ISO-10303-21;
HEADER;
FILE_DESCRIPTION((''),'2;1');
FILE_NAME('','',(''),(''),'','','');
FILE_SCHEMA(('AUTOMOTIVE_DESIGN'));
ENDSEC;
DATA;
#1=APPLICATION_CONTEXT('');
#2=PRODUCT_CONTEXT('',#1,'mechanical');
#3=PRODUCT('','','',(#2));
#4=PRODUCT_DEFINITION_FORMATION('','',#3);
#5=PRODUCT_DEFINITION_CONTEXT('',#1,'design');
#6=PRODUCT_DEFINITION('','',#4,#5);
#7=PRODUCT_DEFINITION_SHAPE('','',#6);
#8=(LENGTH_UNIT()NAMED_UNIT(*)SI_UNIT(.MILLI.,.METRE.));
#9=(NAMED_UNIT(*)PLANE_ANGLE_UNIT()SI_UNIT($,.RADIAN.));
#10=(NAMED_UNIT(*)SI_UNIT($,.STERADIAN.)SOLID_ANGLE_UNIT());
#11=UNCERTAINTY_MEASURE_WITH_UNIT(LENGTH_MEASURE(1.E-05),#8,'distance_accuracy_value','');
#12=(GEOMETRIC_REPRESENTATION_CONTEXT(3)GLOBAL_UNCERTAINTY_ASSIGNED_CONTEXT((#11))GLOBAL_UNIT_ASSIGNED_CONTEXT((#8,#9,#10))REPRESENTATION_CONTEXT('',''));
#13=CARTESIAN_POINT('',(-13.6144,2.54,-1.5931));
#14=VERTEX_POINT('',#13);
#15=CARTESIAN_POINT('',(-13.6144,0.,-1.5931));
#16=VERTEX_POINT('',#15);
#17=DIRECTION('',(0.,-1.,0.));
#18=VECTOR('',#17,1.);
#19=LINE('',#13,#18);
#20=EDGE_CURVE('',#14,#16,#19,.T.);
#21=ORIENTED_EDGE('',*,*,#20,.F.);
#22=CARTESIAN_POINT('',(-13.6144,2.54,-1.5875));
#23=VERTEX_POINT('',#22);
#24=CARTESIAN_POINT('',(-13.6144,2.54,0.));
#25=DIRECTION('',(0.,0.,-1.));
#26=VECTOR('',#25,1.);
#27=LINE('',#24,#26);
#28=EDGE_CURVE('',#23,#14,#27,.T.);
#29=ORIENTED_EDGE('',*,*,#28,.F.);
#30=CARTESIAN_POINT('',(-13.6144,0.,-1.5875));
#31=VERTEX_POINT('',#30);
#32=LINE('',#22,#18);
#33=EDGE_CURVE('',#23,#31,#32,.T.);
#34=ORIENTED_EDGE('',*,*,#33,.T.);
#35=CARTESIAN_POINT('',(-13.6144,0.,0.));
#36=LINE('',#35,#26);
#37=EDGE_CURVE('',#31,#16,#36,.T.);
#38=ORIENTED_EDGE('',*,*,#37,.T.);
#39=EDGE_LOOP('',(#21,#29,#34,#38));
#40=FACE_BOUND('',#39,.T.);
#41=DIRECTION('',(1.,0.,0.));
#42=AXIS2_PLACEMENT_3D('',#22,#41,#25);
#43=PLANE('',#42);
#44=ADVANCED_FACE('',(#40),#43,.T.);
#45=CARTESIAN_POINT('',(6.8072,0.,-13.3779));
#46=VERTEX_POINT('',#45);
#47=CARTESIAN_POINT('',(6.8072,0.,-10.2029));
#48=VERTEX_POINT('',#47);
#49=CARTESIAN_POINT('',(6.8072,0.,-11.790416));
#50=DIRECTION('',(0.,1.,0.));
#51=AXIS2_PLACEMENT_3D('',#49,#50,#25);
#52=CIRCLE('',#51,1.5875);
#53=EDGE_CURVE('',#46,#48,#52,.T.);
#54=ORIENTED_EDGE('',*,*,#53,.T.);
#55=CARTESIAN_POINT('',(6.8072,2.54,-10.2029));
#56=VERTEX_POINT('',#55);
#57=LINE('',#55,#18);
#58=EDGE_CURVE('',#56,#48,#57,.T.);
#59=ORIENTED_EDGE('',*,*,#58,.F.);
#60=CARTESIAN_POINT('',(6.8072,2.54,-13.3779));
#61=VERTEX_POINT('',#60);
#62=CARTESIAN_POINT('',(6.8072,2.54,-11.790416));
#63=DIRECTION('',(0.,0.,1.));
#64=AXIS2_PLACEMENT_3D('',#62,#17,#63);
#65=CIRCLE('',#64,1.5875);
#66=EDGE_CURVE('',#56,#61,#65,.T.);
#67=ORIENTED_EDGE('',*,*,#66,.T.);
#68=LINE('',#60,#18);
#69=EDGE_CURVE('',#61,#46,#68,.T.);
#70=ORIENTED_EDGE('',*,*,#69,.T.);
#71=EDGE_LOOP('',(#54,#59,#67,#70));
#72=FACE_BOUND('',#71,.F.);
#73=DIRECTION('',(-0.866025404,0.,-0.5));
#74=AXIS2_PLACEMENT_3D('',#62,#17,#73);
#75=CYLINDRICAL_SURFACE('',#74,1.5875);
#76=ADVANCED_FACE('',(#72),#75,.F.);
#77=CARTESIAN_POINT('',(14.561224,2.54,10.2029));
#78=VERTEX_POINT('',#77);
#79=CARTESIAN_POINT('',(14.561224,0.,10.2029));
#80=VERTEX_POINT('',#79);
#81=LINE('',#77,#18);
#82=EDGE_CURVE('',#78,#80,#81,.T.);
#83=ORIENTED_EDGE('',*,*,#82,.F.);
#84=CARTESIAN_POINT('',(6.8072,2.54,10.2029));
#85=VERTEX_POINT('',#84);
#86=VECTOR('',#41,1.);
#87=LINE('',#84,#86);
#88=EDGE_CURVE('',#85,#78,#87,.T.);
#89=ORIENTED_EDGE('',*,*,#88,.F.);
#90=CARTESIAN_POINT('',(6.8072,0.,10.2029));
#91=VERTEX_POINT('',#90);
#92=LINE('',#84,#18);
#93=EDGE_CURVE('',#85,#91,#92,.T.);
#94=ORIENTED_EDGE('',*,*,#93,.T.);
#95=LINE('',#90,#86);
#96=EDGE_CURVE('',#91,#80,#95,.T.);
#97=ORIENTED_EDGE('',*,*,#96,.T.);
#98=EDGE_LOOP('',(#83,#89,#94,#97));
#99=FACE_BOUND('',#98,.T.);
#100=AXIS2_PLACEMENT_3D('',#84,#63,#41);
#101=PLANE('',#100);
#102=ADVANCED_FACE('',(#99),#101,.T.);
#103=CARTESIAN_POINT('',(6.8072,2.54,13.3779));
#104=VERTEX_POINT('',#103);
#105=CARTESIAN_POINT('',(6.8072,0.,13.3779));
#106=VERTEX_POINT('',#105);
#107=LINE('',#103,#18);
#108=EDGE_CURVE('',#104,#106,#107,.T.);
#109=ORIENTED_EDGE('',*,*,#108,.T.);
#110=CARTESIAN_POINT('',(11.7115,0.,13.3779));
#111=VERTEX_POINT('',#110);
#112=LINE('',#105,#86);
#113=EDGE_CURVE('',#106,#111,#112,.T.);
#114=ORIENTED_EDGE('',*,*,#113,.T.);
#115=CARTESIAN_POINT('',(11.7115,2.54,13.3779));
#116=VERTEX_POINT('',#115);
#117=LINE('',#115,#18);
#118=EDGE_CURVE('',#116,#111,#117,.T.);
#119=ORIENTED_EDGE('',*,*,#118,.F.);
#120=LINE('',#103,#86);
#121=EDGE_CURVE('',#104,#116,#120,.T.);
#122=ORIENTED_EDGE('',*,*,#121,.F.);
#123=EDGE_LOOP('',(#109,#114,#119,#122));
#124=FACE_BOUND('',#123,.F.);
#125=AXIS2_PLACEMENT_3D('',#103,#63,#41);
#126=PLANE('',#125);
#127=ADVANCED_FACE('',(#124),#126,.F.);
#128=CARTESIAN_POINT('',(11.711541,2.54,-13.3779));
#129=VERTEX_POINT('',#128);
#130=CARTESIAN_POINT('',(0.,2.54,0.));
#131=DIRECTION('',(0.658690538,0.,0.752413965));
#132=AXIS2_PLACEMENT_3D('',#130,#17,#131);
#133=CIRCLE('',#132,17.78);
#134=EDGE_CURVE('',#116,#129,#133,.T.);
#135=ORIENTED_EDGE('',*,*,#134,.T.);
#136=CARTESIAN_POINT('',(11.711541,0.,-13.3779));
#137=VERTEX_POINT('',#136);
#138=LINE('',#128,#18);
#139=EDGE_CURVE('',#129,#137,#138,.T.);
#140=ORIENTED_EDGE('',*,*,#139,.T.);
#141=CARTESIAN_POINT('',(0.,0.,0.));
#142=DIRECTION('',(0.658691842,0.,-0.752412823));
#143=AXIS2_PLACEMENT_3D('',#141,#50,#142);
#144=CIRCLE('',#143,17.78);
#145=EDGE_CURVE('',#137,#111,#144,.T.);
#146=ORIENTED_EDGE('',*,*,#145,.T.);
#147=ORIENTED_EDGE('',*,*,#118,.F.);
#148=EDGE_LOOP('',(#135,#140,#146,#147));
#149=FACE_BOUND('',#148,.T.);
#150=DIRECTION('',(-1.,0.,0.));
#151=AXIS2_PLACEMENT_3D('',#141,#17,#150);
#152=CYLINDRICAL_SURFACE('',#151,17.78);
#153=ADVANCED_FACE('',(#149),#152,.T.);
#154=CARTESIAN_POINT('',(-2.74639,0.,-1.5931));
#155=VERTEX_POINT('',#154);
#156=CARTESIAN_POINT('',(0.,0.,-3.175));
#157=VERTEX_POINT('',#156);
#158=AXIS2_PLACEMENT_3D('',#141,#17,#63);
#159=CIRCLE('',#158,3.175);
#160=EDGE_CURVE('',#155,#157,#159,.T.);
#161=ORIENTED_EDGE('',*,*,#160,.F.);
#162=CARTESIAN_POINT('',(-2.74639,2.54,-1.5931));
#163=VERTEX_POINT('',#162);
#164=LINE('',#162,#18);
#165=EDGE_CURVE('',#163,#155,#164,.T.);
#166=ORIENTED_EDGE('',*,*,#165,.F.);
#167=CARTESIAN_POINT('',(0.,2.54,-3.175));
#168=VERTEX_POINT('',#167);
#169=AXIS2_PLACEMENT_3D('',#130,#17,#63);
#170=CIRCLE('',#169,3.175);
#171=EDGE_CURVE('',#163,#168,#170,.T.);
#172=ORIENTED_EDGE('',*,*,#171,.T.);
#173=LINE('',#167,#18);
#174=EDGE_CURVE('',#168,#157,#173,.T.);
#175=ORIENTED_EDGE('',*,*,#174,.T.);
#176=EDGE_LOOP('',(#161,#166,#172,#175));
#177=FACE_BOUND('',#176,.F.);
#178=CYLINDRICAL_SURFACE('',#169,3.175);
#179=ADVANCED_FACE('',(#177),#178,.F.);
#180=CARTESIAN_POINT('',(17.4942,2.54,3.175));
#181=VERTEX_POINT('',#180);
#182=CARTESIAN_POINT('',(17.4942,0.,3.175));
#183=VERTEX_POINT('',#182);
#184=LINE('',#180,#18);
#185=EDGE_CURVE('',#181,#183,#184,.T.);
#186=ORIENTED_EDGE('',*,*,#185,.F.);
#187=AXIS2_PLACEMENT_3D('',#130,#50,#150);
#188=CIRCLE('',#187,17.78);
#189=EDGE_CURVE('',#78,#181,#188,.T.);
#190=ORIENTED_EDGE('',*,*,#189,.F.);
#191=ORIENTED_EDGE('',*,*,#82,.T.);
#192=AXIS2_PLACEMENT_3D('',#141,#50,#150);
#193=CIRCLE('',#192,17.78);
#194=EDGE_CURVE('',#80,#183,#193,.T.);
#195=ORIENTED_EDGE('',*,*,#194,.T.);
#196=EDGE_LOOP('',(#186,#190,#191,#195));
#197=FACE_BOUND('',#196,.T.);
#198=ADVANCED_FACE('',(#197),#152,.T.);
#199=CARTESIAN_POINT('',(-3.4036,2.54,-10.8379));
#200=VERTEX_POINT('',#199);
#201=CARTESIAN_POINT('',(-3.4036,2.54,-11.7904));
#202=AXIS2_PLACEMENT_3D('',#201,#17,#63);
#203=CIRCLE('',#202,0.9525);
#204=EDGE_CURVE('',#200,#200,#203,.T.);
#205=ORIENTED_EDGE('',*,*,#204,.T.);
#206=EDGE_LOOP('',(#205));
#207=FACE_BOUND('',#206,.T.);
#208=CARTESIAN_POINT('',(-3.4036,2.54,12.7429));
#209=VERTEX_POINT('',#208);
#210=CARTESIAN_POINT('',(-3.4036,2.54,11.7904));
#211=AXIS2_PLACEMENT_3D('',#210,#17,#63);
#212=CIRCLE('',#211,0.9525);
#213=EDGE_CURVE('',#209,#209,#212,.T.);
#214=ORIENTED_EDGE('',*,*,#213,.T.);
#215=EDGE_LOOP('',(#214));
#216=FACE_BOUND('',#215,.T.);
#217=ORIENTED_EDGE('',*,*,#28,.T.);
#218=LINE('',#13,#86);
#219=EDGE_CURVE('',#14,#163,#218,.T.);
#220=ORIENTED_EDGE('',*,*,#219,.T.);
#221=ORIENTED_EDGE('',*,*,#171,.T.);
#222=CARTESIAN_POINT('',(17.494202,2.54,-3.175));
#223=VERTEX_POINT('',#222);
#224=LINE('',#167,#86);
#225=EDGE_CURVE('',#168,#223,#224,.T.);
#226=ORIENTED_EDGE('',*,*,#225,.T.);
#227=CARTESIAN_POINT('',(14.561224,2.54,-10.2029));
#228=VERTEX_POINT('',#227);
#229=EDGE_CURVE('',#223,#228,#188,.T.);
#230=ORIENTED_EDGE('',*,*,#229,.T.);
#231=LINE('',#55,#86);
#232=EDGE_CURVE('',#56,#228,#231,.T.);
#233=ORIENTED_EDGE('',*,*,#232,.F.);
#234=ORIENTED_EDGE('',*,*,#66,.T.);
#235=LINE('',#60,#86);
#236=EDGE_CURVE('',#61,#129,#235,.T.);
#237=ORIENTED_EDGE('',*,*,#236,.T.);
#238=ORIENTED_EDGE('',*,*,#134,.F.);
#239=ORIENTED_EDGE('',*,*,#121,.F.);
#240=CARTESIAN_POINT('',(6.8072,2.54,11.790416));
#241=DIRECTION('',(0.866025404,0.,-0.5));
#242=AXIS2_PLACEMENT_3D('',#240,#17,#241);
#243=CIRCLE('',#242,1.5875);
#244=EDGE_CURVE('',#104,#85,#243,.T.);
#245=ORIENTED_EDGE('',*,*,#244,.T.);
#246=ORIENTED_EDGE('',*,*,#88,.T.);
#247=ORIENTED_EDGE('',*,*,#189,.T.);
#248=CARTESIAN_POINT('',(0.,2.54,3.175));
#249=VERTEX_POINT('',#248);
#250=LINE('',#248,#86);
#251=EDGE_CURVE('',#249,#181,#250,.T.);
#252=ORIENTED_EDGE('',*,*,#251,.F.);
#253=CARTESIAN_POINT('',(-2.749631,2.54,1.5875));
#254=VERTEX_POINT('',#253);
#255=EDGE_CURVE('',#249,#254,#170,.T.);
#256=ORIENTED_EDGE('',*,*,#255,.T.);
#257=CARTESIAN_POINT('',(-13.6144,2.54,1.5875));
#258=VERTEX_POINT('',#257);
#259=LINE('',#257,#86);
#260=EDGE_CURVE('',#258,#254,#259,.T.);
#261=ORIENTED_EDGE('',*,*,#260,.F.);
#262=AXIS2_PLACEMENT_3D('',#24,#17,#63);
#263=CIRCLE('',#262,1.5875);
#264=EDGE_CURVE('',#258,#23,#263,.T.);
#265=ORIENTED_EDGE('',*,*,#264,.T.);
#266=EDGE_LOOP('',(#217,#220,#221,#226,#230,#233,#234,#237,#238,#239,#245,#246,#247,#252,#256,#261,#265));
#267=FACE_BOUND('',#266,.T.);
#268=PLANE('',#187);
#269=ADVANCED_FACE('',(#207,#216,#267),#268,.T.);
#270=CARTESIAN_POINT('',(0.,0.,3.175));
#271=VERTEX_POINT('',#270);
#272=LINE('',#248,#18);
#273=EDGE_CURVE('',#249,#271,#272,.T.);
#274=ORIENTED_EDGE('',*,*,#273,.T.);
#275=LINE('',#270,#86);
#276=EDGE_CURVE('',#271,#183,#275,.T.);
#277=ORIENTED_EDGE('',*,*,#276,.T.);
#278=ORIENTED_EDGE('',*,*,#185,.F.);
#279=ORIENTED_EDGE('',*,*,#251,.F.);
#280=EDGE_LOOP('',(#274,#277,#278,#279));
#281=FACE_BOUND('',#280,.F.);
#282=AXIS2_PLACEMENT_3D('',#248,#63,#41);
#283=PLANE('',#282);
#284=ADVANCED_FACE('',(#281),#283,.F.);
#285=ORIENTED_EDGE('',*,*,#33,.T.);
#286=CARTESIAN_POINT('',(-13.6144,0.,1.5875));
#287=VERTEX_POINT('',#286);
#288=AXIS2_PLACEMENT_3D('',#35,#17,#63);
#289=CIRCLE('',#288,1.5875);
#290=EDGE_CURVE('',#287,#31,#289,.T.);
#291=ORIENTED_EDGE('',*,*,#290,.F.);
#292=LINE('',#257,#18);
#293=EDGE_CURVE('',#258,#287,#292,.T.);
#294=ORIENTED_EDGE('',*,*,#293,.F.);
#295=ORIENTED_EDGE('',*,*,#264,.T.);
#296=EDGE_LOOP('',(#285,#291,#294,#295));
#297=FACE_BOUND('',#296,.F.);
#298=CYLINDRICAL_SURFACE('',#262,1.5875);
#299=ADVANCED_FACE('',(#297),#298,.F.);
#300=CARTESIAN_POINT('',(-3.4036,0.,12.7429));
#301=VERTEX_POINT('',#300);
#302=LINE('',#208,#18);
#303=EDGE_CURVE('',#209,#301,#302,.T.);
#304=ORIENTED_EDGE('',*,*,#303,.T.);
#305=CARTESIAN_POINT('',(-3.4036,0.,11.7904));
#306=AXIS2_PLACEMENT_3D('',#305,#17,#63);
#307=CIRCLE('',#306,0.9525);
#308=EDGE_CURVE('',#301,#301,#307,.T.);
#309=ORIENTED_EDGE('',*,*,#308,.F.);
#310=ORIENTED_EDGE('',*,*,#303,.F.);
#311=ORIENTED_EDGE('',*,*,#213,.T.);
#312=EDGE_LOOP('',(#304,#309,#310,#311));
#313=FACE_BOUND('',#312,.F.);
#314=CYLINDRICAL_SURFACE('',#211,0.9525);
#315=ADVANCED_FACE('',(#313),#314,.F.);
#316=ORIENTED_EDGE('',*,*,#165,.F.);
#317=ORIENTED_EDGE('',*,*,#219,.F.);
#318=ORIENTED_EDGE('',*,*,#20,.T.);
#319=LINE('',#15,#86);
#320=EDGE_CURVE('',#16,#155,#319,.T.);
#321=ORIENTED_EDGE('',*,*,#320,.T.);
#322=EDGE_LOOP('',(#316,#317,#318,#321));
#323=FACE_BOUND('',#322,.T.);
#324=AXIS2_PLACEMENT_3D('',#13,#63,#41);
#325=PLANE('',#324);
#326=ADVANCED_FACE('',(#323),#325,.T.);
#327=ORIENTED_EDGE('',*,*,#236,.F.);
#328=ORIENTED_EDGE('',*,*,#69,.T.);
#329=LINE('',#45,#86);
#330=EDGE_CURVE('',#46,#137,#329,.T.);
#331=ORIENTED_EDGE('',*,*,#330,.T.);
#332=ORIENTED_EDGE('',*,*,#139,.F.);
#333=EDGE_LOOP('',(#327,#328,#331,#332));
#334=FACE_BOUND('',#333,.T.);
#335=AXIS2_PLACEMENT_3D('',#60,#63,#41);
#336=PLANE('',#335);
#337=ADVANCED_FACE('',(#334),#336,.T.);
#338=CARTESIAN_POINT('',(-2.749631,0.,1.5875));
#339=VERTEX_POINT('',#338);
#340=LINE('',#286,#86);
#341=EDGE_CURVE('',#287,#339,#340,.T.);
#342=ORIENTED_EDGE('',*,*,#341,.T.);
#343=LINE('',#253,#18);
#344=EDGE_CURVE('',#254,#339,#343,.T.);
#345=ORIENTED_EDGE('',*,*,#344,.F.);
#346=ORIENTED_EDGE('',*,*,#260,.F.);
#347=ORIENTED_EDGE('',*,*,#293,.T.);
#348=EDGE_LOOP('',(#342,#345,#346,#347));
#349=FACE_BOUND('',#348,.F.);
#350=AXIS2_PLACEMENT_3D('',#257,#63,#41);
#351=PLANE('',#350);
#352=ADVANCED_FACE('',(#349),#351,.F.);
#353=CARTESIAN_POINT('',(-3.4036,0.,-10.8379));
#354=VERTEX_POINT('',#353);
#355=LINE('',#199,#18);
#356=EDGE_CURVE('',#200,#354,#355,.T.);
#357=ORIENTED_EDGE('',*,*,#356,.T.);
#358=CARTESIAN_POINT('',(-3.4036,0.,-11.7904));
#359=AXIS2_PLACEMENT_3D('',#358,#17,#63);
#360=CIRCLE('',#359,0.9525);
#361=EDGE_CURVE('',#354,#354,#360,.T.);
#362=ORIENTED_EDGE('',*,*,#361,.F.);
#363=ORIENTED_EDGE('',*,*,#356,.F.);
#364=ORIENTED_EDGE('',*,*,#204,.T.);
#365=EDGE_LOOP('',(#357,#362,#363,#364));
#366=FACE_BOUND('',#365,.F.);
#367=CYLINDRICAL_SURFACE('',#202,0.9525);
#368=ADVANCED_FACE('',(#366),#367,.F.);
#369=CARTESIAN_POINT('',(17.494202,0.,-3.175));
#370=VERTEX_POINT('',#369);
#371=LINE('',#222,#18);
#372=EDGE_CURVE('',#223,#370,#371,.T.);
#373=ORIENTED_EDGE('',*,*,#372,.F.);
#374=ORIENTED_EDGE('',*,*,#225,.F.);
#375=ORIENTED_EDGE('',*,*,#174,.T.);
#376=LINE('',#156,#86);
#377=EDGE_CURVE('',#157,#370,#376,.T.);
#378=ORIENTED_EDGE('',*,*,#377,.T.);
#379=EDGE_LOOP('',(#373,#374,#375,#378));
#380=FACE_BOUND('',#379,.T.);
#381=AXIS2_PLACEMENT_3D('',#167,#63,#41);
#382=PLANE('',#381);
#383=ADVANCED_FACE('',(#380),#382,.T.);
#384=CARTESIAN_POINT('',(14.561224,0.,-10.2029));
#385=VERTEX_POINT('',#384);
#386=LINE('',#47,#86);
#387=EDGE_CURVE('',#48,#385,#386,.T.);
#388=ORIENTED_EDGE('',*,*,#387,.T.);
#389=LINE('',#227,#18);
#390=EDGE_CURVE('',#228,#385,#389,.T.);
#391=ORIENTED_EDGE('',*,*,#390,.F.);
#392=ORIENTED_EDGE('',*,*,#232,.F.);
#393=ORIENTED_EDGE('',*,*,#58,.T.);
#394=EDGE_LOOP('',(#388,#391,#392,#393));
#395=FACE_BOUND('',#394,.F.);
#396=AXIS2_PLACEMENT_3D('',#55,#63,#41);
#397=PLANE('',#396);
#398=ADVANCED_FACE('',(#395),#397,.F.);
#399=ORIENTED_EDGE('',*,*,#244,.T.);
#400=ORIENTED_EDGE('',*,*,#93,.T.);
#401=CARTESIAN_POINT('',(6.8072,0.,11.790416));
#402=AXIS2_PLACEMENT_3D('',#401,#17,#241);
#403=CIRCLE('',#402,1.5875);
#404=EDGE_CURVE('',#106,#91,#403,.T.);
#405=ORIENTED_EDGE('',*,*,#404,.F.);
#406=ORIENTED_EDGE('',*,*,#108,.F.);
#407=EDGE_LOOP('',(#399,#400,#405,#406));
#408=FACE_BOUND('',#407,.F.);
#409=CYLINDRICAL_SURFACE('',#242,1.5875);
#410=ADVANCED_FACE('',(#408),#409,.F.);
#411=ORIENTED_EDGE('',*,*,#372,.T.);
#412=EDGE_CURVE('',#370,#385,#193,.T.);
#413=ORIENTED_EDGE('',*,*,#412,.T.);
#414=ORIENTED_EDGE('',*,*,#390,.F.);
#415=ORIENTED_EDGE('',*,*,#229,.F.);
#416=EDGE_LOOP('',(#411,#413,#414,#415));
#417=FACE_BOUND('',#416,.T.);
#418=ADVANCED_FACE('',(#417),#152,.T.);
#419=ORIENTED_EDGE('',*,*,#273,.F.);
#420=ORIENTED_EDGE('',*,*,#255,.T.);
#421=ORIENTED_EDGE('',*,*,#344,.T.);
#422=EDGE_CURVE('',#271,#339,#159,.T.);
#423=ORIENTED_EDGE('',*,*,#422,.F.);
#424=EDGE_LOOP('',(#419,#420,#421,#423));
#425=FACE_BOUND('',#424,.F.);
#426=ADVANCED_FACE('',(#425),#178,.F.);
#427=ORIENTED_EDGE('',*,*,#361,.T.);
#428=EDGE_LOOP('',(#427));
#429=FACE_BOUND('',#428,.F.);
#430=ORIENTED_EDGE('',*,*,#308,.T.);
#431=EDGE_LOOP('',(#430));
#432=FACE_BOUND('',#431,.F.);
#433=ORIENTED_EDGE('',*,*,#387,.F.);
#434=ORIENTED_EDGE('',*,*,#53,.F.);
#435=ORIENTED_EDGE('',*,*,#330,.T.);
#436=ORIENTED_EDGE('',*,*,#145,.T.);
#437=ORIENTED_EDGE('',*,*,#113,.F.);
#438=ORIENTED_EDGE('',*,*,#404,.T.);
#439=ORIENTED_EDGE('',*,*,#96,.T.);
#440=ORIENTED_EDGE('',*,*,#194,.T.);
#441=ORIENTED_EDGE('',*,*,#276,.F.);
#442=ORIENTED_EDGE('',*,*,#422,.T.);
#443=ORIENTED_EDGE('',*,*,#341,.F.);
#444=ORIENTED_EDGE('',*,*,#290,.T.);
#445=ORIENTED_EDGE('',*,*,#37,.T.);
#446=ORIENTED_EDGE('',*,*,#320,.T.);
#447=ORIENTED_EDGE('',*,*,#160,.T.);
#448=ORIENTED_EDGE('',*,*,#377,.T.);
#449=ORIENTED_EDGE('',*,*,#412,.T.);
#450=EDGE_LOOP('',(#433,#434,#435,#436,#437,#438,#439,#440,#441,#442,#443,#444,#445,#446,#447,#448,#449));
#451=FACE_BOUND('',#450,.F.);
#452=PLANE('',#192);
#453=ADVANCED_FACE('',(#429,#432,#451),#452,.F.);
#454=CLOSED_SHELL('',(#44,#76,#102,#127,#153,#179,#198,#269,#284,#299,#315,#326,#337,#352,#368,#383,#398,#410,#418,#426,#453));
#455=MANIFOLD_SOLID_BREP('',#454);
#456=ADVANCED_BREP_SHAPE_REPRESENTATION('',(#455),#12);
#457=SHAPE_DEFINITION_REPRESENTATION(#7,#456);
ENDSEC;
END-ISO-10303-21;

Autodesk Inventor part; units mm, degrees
ref_plane "YZ Plane" through (0, 0, 0) normal (1, 0, 0) x (0, 1, 0)
ref_plane "XZ Plane" through (0, 0, 0) normal (0, 1, 0) x (-1, 0, 0)
ref_plane "XY Plane" through (0, 0, 0) normal (0, 0, 1) x (1, 0, 0)
sketch "Sketch1" plane through (0, 0, 0) normal (0, 1, 0) x (-1, 0, 0)
  circle A0 centre (0, 0) radius 17.78
  dimension "d0" = 35.56
extrude "Extrusion1" add sketch "Sketch1" along normal blind 2.54
sketch "Sketch2" plane through (0, 2.54, 0) normal (0, 1, 0) x (1, 0, 0)
  line L0 (0, 0) -> (-13.6144, 0)
  dimension "d3" = 13.6144
hole "Hole1" at (-13.6144, 2.54, 0) direction (0, -1, 0) diameter 3.175 end through all
pattern_circular "Circular Pattern1" count 3 over 360 about axis through (0, 0, 0) along (0, 1, 0) of "Hole1"
sketch "Sketch3" plane through (0, 2.54, 0) normal (0, 1, 0) x (1, 0, 0)
  circle A0 centre (6.8072, -11.7904) radius 1.5875 projected
  line L0 (6.8072, -13.3779) -> (11.9048, -13.3779)
  line L1 (6.8072, -10.2029) -> (15.3383, -10.2029)
  line L2 (15.3383, -10.2029) -> (11.7115, -13.3779)
  circle A1 centre (0, 0) radius 17.78 projected
  circle A2 centre (6.8072, 11.7904) radius 1.5875 projected
  line L3 (6.8072, 10.2029) -> (15.7862, 10.2029)
  line L4 (15.7862, 10.2029) -> (14.1062, 14.4538)
  line L5 (6.8072, 13.3779) -> (14.5314, 13.3779)
  line L6 (11.7115, -13.3779) -> (15.2969, -10.2391)
  circle A3 centre (0, 0) radius 17.78 projected
  point P0 (11.7115, 13.3779)
  point P1 (14.5612, 10.2029)
  point P2 (14.5612, -10.2029)
extrude "Extrusion2" cut sketch "Sketch3" against normal blind 2.54 contours A0 L1 A1 L0 | A1 L3 A2 L5
sketch "Sketch4" plane through (0, 2.54, 0) normal (0, 1, 0) x (1, 0, 0)
  circle A0 centre (0, 0) radius 3.175
  dimension "d16" = 6.35
hole "Hole2" at (0, 2.54, 0) direction (0, -1, 0) diameter 6.35 end through all
sketch "Sketch5" plane through (0, 2.54, 0) normal (0, 1, 0) x (1, 0, 0)
  circle A0 centre (-13.6144, 0) radius 1.5875 projected
  line L0 (-13.6144, -1.5875) -> (17.709, -1.5875)
  arc A1 (14.5612, -10.2029) -> (14.5612, 10.2029) centre (0, 0) ccw projected
  line L1 (-13.6144, -1.5875) -> (-13.6144, 0)
  line L2 (-13.6144, 0) -> (-13.6144, 1.5931)
  line L3 (-13.6144, 1.5931) -> (17.709, 1.5931)
  line L4 (17.709, 1.5931) -> (17.709, -1.5875)
  circle A2 centre (0, 0) radius 3.175 projected
  line L5 (0, 3.175) -> (17.709, 3.175)
  line L6 (0, -3.175) -> (17.4942, -3.175)
  line L7 (17.4942, -3.175) -> (17.709, -1.5875)
  line L8 (17.709, -1.5875) -> (17.709, 3.175)
  point P0 (17.4942, 3.175)
  point P1 (-2.7496, -1.5875)
  point P2 (-2.7464, 1.5931)
  point P3 (-13.6144, 1.5875)
extrude "Extrusion3" cut sketch "Sketch5" against normal blind 2.54 contours A0 L2 L3 A2 L0 | A2 L3 L4 L0 | L0 L7 L6 A2 | L4 A1 | A1 L7 | A2 L5 A1 L3
sketch "Sketch9" plane through (0, 2.54, 0) normal (0, 1, 0) x (1, 0, 0)
  arc A0 (-13.6144, 1.5875) -> (-13.6144, -1.5875) centre (-13.6144, 0) ccw projected
  arc A1 (6.8072, 13.3779) -> (6.8072, 10.2029) centre (6.8072, 11.7904) ccw projected
  line L0 (-13.6144, 0) -> (6.8072, 11.7904)
  arc A2 (6.8072, -10.2029) -> (6.8072, -13.3779) centre (6.8072, -11.7904) ccw projected
  line L1 (6.8072, 11.7904) -> (6.8072, -11.7904)
  line L2 (6.8072, -11.7904) -> (-13.6144, 0)
  line L3 (-13.6144, 0) -> (-13.6144, 11.7904)
  line L4 (-13.6144, 11.7904) -> (6.8072, 11.7904)
  line L5 (6.8072, -11.7904) -> (-13.6144, -11.7904)
  line L6 (-13.6144, -11.7904) -> (-13.6144, 0)
  circle A3 centre (-3.4036, 11.7904) radius 0.635
  circle A4 centre (-3.4036, -11.7904) radius 0.635
  point P0 (0, 0)
  dimension "d40" = 1.27
hole "Hole5" at (-3.4036, 2.54, -11.7904) at (-3.4036, 2.54, 11.7904) direction (0, -1, 0) diameter 1.905 end through all
properties part number "undertable" material "Stainless Steel AISI 304"
